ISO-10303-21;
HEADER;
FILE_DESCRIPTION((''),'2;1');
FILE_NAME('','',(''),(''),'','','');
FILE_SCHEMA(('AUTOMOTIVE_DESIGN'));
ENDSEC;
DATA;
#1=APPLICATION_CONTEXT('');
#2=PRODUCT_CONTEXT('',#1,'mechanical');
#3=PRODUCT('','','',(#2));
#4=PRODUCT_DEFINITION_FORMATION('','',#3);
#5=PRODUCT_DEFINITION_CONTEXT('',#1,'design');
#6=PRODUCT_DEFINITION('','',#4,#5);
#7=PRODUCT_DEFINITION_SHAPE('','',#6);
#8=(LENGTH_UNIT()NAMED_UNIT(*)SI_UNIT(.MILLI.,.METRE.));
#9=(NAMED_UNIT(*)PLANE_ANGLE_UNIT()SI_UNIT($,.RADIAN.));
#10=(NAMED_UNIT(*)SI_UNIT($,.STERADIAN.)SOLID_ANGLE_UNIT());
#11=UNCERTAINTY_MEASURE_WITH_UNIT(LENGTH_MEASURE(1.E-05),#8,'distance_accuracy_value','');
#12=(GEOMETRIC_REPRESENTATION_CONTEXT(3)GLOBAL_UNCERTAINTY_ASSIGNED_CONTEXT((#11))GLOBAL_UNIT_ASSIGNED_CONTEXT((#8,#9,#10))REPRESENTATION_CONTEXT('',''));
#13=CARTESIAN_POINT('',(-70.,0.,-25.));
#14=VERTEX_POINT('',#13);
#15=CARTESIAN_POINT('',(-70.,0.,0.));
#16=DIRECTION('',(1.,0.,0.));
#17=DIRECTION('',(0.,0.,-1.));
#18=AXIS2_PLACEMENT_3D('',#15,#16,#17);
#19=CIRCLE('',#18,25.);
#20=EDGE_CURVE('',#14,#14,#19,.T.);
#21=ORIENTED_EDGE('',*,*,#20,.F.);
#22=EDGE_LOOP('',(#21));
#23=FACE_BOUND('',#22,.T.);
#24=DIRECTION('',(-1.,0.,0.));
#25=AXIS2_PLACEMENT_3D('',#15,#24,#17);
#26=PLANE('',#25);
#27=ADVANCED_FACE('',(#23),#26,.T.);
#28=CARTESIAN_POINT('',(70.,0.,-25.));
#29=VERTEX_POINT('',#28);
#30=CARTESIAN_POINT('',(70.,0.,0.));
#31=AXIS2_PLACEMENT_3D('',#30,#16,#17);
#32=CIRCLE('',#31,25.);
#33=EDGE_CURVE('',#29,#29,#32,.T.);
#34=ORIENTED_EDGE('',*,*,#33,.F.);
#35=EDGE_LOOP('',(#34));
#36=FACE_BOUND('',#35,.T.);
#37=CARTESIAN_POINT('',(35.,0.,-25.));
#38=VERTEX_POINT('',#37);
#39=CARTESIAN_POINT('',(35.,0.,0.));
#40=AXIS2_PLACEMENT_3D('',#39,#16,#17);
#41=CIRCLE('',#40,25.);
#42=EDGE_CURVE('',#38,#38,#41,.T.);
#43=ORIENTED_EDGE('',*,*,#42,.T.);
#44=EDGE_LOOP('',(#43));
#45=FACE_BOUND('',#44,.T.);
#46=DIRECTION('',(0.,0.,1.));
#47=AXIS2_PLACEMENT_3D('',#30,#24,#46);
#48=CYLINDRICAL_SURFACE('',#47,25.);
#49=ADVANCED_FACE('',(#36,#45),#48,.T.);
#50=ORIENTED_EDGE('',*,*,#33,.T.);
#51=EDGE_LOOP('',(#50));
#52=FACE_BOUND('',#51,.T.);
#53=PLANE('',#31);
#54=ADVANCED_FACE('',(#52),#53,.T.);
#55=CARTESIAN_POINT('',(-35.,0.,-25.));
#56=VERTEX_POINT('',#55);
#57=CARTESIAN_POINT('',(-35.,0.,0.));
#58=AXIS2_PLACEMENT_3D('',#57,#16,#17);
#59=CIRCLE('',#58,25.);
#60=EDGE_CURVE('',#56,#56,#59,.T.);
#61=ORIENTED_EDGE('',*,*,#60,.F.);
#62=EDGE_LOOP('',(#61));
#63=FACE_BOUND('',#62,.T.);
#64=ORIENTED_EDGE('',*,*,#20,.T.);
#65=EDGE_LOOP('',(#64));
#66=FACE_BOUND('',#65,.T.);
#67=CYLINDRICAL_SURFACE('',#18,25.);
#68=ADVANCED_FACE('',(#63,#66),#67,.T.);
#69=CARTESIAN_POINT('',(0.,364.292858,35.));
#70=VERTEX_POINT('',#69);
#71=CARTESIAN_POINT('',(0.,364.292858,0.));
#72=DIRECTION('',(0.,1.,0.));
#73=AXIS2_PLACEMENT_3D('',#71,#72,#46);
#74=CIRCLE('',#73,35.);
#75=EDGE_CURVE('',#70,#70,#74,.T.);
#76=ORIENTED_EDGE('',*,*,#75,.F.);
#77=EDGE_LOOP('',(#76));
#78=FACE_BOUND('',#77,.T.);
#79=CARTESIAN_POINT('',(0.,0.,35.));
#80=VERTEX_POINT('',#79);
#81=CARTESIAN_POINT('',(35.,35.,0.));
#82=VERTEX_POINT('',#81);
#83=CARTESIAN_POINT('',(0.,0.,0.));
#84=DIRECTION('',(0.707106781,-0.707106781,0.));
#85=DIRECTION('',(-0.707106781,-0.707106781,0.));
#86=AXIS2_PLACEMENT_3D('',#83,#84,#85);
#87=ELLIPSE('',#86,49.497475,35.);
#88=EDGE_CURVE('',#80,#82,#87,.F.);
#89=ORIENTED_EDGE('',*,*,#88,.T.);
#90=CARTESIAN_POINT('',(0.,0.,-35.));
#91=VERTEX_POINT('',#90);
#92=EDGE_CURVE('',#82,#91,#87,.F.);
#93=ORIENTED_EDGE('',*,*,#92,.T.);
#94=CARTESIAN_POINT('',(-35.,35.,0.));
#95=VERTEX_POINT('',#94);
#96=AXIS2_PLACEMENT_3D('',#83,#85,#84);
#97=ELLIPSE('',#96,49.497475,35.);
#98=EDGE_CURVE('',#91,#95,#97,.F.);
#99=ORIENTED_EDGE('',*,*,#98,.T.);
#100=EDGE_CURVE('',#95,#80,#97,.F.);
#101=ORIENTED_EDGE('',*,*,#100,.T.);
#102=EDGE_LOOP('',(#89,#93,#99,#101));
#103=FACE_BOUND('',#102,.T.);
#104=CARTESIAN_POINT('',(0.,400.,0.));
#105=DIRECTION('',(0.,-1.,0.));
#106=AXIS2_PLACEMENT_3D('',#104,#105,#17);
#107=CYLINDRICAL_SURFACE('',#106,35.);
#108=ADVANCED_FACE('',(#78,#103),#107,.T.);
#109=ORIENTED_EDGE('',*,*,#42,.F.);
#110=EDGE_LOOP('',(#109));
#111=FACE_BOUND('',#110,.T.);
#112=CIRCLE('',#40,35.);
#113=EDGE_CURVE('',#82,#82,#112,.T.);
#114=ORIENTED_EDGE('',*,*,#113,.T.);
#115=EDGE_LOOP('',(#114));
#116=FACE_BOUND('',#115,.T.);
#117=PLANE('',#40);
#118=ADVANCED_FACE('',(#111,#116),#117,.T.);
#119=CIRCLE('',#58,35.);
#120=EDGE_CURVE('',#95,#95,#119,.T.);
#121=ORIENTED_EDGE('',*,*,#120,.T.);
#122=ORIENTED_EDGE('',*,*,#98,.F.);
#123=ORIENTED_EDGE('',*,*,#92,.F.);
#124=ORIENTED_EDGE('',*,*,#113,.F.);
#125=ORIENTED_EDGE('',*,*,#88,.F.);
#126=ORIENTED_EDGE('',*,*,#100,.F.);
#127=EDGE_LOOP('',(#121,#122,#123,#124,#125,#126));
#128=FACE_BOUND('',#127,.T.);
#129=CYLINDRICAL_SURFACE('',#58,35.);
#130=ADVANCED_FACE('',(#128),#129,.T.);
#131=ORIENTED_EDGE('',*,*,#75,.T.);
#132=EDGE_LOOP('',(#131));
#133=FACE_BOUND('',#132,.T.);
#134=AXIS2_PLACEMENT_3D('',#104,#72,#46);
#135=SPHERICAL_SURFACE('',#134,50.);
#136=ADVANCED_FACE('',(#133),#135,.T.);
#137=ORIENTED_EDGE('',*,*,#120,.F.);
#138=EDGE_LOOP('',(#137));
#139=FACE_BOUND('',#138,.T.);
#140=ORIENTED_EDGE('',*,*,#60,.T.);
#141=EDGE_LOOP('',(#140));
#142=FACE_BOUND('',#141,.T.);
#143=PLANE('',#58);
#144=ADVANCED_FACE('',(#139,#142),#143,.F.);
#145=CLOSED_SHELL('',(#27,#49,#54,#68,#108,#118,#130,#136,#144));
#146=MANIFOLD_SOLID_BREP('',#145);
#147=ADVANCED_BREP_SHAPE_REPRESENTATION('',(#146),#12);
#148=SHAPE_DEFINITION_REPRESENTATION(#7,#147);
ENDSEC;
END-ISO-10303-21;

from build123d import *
from build123d.topology import SkipClean

# Parameters (mm, degrees)
SKETCH1_R                = 35
BOSS_EXTRUDE1_DEPTH      = 400
BOSS_EXTRUDE2_DEPTH      = 35
BOSS_EXTRUDE2_DEPTH_BACK = 35
SKETCH3_R                = 35
SKETCH4_R                = 25
BOSS_EXTRUDE3_DEPTH      = 35


with BuildPart() as part:
    # Sketch1 → Boss-Extrude1 (new body)
    with BuildSketch(Plane(origin=(0, 0, 0), x_dir=(1, 0, 0), z_dir=(0, 1, 0))):
        Circle(SKETCH1_R)
    extrude(amount=BOSS_EXTRUDE1_DEPTH)

    # Sketch2 → Revolve1 (revolve)
    with BuildSketch(Plane(origin=(0, 400, 0), x_dir=(1, 0, 0), z_dir=(0, 1, 0))):
        with BuildLine():
            ThreePointArc((0, -50), (50, 0), (0, 50))
            Line((0, 50), (0, -50))
        make_face()
    revolve(axis=Axis((0, 400, -50), (0, 0, 1)))

    # Sketch3 → Boss-Extrude2 (add, two sides: drawn at the far end of the back side and taken through both)
    with SkipClean():  # the faces are left unmerged after this step: merging them gives an invalid solid
        with BuildSketch(Plane(origin=(0, 0, 0), x_dir=(0, 0, -1), z_dir=(1, 0, 0)).offset(-BOSS_EXTRUDE2_DEPTH_BACK)):
            Circle(SKETCH3_R)
        extrude(amount=BOSS_EXTRUDE2_DEPTH + BOSS_EXTRUDE2_DEPTH_BACK)

    # Sketch4 → Boss-Extrude3 (add)
    with SkipClean():  # the faces are left unmerged after this step: merging them gives an invalid solid
        with BuildSketch(Plane(origin=(35, 0, 0), x_dir=(0, 0, -1), z_dir=(1, 0, 0))):
            Circle(SKETCH4_R)
        boss_extrude3 = extrude(amount=BOSS_EXTRUDE3_DEPTH)

    # Mirror1: Boss-Extrude3 across plane
    with SkipClean():  # the faces are left unmerged after this step: merging them gives an invalid solid
        add(boss_extrude3.mirror(Plane(origin=(0, 0, 0), x_dir=(0, 0, 1), z_dir=(1, 0, 0))))


solid = part.part
